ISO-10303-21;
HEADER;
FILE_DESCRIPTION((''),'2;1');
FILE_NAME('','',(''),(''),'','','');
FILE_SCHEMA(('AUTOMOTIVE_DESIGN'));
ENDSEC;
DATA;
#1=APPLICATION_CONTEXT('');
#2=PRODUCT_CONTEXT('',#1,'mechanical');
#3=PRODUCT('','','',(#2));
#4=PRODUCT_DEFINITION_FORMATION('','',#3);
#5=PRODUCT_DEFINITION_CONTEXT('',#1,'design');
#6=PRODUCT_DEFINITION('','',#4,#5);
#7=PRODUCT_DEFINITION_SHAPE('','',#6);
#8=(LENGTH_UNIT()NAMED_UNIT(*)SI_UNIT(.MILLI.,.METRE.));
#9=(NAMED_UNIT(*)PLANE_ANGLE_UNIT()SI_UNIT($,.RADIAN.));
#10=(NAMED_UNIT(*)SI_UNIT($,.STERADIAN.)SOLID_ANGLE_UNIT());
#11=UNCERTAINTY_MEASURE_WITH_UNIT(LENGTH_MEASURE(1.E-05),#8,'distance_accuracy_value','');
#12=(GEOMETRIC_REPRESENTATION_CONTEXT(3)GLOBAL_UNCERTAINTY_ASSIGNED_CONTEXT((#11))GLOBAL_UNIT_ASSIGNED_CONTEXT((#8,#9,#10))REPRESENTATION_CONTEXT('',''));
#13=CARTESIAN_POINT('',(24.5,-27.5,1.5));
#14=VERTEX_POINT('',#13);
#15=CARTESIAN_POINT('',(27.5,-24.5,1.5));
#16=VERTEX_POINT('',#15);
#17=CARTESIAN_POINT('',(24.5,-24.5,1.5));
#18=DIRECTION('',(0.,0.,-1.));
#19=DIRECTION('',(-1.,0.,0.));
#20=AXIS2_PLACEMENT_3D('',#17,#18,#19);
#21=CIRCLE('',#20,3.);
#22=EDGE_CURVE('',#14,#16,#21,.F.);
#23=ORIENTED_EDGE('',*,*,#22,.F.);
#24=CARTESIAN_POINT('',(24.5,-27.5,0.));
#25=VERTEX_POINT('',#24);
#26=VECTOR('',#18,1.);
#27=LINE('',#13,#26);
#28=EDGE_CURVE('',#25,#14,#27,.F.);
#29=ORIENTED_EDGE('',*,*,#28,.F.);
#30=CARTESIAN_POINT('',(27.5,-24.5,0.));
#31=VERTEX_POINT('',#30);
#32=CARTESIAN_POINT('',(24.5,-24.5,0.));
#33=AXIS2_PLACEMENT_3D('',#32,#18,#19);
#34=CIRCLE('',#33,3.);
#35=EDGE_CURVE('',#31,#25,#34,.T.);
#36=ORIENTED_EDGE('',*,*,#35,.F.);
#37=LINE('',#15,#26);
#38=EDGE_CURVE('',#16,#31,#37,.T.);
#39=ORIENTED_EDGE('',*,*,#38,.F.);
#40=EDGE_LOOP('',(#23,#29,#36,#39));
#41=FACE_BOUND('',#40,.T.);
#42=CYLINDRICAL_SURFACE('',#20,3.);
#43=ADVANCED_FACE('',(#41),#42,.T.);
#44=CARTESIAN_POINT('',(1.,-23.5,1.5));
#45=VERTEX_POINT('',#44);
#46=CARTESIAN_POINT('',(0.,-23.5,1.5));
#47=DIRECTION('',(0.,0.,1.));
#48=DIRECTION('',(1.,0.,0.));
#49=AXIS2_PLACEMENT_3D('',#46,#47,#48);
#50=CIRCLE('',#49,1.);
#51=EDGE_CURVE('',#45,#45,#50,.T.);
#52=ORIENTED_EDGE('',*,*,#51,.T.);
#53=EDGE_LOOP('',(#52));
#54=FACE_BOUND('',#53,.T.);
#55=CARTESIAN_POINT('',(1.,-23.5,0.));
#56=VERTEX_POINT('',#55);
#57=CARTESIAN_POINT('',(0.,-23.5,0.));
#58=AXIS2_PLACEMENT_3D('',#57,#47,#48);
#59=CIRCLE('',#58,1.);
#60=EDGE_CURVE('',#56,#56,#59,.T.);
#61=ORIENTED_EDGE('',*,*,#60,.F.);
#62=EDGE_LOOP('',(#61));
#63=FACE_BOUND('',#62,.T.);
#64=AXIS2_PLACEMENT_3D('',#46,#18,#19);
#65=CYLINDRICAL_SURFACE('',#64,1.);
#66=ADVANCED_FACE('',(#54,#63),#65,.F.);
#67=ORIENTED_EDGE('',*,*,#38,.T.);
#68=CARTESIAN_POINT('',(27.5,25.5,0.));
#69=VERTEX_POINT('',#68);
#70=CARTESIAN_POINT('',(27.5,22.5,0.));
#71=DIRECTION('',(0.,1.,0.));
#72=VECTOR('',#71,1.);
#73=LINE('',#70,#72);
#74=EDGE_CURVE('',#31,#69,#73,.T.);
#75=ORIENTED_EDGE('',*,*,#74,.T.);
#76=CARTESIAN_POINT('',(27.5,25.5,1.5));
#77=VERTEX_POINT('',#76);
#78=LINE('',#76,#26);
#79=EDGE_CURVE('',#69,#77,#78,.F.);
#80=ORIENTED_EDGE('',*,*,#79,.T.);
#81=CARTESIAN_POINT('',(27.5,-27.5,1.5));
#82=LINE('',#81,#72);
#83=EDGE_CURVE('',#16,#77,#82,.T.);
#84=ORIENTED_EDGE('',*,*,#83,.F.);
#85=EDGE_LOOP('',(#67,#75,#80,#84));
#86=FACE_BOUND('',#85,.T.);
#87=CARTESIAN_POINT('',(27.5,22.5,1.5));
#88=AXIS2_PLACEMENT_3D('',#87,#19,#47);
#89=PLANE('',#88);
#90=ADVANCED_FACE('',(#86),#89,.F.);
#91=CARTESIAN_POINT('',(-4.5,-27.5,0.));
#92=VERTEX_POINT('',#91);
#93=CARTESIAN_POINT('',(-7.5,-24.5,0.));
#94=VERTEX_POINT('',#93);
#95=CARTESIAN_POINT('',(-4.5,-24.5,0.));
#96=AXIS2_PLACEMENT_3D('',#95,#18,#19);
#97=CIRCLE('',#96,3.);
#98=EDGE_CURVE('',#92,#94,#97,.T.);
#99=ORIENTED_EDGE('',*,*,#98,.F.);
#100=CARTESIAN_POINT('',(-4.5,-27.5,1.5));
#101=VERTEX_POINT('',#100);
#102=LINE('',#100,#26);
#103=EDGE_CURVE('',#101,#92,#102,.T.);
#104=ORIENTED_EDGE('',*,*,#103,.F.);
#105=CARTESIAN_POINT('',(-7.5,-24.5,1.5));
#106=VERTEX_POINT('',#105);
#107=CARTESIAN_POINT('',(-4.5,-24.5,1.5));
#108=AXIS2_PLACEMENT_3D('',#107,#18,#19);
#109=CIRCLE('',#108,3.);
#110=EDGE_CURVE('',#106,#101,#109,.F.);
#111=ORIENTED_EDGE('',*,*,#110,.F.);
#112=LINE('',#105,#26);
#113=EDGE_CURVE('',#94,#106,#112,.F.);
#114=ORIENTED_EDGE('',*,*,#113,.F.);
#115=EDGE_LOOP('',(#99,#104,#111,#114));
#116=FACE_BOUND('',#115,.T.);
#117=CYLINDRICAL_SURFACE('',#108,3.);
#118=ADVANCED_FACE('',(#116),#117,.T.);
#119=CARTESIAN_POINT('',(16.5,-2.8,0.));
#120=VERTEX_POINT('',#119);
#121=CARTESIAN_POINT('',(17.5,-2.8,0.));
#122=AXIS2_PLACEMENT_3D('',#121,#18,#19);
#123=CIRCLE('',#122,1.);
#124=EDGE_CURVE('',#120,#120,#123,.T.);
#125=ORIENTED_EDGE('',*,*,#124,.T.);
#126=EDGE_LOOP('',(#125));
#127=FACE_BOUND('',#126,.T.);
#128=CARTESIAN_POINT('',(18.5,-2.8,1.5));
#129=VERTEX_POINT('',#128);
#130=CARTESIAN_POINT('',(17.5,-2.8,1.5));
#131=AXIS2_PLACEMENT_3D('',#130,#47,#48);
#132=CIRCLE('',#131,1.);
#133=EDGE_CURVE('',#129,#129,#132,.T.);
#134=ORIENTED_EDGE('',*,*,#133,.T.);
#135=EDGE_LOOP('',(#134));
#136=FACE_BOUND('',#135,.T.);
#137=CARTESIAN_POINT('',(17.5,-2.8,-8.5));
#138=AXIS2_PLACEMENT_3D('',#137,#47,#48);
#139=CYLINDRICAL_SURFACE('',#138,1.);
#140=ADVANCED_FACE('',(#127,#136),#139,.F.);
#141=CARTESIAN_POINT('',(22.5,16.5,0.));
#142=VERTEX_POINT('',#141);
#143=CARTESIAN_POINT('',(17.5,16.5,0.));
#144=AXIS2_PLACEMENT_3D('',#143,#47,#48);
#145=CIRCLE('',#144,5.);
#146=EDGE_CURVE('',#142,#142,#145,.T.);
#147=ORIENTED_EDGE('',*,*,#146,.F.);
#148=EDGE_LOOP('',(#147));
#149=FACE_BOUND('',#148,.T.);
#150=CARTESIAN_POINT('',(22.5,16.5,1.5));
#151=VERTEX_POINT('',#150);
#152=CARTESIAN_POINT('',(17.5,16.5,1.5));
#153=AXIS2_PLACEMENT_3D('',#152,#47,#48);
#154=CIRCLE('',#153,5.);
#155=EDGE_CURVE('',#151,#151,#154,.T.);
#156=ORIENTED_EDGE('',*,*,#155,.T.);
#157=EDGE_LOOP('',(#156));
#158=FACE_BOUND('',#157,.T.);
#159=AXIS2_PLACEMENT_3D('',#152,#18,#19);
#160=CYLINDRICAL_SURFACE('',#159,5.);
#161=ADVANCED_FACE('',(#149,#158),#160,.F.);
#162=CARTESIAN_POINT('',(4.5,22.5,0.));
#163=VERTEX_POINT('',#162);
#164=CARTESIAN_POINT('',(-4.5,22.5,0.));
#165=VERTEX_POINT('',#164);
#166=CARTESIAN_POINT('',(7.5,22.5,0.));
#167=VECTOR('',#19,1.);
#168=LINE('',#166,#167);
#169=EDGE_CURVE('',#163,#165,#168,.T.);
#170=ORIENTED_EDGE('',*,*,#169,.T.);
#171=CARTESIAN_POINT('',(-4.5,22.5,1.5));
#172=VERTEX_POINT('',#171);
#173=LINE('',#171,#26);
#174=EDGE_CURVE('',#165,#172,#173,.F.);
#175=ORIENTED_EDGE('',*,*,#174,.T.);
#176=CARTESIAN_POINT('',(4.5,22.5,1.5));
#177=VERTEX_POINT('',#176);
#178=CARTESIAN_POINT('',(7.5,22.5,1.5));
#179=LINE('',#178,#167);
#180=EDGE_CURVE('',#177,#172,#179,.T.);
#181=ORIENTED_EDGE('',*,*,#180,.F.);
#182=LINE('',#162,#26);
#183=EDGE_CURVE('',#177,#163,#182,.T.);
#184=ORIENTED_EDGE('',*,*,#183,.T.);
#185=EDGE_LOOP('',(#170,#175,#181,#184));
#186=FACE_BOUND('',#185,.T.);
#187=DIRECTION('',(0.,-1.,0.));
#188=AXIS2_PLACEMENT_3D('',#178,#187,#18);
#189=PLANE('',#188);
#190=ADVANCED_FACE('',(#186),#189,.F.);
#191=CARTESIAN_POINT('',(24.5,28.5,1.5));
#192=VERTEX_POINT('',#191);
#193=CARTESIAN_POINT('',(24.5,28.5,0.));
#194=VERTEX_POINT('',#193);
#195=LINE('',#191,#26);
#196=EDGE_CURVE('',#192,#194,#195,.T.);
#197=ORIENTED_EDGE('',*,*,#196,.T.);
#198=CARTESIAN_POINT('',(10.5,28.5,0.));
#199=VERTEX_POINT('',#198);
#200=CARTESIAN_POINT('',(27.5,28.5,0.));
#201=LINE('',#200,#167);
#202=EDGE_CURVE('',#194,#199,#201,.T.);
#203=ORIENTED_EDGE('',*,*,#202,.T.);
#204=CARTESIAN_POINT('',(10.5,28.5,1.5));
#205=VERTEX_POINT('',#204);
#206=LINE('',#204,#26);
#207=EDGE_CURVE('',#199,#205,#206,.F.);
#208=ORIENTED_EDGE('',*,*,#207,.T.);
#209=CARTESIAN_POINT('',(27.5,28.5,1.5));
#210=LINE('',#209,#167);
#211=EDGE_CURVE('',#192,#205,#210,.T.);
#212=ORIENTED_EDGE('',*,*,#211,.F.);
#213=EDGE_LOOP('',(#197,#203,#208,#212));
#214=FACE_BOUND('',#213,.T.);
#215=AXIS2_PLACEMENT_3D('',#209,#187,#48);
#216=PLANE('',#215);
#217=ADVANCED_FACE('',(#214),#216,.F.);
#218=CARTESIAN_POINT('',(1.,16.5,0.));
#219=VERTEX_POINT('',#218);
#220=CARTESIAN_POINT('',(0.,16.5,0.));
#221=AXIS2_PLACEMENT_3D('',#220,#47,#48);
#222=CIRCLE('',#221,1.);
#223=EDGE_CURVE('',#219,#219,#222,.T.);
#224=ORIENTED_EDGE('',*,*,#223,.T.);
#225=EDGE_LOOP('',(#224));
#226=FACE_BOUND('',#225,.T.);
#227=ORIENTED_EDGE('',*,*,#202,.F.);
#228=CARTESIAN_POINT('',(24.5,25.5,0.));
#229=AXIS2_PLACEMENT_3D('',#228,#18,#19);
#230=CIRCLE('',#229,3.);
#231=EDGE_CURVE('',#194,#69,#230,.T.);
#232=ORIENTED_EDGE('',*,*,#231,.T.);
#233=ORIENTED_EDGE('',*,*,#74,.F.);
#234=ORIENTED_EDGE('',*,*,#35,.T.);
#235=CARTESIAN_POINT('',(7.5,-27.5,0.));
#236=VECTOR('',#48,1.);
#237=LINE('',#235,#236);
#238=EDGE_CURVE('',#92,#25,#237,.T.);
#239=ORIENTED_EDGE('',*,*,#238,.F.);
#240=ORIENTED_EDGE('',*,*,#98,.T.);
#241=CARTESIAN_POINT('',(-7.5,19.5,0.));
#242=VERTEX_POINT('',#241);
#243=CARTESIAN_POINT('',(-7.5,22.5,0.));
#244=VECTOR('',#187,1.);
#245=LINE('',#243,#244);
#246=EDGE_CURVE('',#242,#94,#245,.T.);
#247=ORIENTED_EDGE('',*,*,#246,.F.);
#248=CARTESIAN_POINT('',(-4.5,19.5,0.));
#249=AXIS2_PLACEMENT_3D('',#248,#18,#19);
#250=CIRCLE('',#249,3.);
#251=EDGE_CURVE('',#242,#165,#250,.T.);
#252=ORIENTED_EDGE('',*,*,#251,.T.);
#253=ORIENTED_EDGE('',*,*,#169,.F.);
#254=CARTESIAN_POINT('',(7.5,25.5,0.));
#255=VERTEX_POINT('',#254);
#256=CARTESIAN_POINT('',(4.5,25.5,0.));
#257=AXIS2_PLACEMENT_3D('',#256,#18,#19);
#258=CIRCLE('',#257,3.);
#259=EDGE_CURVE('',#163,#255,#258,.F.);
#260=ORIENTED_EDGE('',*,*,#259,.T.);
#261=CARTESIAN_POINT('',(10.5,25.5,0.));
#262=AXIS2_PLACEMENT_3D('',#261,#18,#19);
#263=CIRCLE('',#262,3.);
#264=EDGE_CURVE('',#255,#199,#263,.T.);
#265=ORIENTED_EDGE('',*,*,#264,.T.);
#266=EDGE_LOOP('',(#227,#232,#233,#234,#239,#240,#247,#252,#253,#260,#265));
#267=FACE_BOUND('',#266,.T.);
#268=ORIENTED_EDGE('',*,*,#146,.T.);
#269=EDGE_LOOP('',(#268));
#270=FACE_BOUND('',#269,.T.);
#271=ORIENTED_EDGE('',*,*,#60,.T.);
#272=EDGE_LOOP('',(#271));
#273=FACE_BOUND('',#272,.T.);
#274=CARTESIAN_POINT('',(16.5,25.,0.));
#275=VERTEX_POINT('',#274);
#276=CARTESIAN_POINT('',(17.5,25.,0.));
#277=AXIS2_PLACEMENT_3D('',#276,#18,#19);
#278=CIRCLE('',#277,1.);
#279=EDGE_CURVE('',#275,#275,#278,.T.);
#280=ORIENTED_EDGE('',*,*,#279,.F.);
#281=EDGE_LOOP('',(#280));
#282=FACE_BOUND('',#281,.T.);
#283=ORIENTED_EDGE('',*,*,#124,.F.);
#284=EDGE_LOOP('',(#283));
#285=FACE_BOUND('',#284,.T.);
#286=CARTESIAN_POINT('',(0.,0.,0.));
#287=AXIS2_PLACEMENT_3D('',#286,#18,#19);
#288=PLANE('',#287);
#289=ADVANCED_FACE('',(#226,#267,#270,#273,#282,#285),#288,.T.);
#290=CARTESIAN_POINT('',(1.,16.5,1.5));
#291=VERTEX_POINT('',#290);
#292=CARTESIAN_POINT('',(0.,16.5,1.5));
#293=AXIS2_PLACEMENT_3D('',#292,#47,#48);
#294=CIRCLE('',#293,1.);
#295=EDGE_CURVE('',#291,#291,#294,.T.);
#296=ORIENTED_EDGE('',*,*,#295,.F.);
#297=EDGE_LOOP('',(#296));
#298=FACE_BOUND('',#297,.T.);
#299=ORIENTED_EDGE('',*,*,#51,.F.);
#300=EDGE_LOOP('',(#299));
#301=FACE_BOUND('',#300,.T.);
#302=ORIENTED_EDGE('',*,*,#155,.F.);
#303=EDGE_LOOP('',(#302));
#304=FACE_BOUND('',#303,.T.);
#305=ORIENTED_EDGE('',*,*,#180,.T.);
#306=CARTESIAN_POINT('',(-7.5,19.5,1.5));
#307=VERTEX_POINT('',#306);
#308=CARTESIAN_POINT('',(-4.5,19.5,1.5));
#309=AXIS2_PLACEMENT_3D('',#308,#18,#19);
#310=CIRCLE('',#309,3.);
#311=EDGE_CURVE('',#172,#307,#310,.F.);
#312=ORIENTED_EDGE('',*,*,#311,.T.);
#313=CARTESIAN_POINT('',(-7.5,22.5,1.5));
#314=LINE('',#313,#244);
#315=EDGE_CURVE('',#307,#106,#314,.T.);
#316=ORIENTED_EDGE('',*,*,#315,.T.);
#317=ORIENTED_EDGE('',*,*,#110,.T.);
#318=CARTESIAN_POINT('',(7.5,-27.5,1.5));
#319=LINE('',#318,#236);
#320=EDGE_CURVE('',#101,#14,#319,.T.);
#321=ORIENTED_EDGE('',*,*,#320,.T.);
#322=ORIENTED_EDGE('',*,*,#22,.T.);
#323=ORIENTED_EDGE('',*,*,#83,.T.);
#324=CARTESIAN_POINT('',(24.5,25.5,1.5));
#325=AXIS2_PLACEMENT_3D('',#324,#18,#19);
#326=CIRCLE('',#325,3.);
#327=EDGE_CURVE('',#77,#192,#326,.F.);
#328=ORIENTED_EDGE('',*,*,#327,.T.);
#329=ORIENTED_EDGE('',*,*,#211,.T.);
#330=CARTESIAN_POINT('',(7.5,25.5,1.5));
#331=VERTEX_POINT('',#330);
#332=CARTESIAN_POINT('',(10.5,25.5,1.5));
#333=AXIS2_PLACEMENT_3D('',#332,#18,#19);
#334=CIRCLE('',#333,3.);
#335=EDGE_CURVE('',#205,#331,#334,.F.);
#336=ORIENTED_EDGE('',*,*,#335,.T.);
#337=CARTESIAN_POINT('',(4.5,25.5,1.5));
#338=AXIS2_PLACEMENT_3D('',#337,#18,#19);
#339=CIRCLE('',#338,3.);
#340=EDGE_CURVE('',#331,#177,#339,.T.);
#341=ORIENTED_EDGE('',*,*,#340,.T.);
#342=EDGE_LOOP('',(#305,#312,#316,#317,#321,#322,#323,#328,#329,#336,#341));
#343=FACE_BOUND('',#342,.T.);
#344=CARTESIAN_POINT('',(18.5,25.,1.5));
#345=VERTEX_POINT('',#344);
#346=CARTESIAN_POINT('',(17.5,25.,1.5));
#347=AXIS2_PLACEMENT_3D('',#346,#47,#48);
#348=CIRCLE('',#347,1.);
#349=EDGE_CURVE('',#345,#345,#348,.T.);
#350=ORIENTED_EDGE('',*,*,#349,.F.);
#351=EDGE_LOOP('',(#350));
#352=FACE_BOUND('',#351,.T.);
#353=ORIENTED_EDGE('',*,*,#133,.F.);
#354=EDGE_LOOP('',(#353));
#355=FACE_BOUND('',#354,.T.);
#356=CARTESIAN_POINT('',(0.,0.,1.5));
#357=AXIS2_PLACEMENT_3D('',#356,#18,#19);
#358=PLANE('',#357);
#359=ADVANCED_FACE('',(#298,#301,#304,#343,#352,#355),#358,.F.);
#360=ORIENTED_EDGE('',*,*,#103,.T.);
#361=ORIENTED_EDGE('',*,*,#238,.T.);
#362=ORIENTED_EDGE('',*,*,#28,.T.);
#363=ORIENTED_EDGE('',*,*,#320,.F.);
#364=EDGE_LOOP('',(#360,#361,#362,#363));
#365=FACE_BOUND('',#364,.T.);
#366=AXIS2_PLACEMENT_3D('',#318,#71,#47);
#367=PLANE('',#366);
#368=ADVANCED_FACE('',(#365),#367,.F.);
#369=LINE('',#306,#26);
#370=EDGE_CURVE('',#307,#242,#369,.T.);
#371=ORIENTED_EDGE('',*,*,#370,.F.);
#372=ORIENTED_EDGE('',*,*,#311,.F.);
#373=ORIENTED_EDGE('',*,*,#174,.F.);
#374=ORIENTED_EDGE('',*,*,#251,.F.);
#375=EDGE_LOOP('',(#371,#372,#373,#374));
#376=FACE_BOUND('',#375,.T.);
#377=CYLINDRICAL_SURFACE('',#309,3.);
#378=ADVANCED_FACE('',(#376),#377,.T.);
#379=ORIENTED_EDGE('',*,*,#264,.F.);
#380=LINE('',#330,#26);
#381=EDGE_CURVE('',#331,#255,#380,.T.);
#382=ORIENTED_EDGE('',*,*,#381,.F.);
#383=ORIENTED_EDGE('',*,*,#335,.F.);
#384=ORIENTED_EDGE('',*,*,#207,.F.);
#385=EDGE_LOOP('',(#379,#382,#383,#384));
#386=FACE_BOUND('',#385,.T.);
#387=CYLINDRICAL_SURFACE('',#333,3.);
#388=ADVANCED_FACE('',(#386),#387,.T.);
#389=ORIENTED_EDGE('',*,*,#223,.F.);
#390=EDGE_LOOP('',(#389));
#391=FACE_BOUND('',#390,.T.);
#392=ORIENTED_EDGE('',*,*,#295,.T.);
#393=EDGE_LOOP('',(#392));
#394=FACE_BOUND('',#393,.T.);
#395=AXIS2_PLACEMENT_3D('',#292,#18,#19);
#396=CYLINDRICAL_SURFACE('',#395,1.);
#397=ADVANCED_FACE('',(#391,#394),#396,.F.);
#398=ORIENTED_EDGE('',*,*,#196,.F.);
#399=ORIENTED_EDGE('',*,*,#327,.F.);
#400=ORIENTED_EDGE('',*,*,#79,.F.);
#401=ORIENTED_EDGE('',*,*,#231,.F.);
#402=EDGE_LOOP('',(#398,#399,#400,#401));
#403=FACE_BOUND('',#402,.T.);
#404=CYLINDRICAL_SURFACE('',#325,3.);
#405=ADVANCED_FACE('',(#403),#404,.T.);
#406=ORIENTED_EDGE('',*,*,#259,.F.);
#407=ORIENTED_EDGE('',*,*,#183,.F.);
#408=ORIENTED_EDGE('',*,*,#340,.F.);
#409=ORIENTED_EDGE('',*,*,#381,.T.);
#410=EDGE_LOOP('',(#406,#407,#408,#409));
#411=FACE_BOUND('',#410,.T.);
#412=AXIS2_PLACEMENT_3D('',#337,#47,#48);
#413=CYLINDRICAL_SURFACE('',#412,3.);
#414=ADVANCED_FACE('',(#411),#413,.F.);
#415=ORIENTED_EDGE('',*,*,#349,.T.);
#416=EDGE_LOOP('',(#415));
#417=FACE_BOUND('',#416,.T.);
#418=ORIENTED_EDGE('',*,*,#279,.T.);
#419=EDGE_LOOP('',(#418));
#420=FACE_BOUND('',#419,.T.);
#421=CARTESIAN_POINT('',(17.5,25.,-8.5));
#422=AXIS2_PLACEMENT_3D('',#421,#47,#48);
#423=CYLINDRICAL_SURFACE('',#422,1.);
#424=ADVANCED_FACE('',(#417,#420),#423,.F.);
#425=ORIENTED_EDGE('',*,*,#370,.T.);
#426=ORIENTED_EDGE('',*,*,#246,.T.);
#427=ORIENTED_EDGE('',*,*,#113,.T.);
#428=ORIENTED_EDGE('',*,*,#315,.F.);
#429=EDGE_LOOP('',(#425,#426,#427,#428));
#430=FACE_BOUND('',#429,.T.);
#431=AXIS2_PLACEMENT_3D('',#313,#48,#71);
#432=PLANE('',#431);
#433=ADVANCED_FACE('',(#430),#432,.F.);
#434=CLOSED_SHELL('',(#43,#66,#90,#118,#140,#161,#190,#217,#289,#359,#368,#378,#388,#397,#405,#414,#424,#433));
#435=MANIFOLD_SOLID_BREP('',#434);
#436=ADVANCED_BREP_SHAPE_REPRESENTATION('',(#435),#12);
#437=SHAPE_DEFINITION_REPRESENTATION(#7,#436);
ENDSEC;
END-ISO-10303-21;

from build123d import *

# Parameters (mm, degrees)
SKETCH_1_R          = 1
SKETCH_1_R_2        = 5
EXTRUDE_1_DEPTH     = 1.5
SKETCH_3_R          = 1
CUT_EXTRUDE_1_DEPTH = 10
FILLET_1_R          = 3


with BuildPart() as part:
    # 草图1 → 凸台-拉伸1 (new body)
    with BuildSketch(Plane.XY):
        Polygon((7.5, 22.5), (-7.5, 22.5), (-7.5, -27.5), (7.5, -27.5), (27.5, -27.5), (27.5, 2.5), (27.5, 14.5), (27.5, 22.5), (27.5, 28.5), (7.5, 28.5), align=None)
        with Locations((0, -23.5)):
            Circle(SKETCH_1_R, mode=Mode.SUBTRACT)
        with Locations((0, 16.5)):
            Circle(SKETCH_1_R, mode=Mode.SUBTRACT)
        with Locations((17.5, 16.5)):
            Circle(SKETCH_1_R_2, mode=Mode.SUBTRACT)
    extrude(amount=EXTRUDE_1_DEPTH)

    # 草图3 → 切除-拉伸1 (cut)
    with BuildSketch(Plane.XY.offset(1.5)):
        with Locations((17.5, -2.8)):
            Circle(SKETCH_3_R)
        with Locations((17.5, 25)):
            Circle(SKETCH_3_R)
    extrude(amount=-CUT_EXTRUDE_1_DEPTH, mode=Mode.SUBTRACT)

    # 圆角1
    fillet_1_edges = [part.edges().sort_by_distance(p)[0] for p in [
        (7.5, 22.5, 0.75),
        (7.5, 28.5, 0.75),
        (-7.5, 22.5, 0.75),
        (27.5, 28.5, 0.75),
        (-7.5, -27.5, 0.75),
        (27.5, -27.5, 0.75),
    ]]
    fillet(fillet_1_edges, radius=FILLET_1_R - 0.0001)  # a hair under: the kernel refuses the full size


solid = part.part
